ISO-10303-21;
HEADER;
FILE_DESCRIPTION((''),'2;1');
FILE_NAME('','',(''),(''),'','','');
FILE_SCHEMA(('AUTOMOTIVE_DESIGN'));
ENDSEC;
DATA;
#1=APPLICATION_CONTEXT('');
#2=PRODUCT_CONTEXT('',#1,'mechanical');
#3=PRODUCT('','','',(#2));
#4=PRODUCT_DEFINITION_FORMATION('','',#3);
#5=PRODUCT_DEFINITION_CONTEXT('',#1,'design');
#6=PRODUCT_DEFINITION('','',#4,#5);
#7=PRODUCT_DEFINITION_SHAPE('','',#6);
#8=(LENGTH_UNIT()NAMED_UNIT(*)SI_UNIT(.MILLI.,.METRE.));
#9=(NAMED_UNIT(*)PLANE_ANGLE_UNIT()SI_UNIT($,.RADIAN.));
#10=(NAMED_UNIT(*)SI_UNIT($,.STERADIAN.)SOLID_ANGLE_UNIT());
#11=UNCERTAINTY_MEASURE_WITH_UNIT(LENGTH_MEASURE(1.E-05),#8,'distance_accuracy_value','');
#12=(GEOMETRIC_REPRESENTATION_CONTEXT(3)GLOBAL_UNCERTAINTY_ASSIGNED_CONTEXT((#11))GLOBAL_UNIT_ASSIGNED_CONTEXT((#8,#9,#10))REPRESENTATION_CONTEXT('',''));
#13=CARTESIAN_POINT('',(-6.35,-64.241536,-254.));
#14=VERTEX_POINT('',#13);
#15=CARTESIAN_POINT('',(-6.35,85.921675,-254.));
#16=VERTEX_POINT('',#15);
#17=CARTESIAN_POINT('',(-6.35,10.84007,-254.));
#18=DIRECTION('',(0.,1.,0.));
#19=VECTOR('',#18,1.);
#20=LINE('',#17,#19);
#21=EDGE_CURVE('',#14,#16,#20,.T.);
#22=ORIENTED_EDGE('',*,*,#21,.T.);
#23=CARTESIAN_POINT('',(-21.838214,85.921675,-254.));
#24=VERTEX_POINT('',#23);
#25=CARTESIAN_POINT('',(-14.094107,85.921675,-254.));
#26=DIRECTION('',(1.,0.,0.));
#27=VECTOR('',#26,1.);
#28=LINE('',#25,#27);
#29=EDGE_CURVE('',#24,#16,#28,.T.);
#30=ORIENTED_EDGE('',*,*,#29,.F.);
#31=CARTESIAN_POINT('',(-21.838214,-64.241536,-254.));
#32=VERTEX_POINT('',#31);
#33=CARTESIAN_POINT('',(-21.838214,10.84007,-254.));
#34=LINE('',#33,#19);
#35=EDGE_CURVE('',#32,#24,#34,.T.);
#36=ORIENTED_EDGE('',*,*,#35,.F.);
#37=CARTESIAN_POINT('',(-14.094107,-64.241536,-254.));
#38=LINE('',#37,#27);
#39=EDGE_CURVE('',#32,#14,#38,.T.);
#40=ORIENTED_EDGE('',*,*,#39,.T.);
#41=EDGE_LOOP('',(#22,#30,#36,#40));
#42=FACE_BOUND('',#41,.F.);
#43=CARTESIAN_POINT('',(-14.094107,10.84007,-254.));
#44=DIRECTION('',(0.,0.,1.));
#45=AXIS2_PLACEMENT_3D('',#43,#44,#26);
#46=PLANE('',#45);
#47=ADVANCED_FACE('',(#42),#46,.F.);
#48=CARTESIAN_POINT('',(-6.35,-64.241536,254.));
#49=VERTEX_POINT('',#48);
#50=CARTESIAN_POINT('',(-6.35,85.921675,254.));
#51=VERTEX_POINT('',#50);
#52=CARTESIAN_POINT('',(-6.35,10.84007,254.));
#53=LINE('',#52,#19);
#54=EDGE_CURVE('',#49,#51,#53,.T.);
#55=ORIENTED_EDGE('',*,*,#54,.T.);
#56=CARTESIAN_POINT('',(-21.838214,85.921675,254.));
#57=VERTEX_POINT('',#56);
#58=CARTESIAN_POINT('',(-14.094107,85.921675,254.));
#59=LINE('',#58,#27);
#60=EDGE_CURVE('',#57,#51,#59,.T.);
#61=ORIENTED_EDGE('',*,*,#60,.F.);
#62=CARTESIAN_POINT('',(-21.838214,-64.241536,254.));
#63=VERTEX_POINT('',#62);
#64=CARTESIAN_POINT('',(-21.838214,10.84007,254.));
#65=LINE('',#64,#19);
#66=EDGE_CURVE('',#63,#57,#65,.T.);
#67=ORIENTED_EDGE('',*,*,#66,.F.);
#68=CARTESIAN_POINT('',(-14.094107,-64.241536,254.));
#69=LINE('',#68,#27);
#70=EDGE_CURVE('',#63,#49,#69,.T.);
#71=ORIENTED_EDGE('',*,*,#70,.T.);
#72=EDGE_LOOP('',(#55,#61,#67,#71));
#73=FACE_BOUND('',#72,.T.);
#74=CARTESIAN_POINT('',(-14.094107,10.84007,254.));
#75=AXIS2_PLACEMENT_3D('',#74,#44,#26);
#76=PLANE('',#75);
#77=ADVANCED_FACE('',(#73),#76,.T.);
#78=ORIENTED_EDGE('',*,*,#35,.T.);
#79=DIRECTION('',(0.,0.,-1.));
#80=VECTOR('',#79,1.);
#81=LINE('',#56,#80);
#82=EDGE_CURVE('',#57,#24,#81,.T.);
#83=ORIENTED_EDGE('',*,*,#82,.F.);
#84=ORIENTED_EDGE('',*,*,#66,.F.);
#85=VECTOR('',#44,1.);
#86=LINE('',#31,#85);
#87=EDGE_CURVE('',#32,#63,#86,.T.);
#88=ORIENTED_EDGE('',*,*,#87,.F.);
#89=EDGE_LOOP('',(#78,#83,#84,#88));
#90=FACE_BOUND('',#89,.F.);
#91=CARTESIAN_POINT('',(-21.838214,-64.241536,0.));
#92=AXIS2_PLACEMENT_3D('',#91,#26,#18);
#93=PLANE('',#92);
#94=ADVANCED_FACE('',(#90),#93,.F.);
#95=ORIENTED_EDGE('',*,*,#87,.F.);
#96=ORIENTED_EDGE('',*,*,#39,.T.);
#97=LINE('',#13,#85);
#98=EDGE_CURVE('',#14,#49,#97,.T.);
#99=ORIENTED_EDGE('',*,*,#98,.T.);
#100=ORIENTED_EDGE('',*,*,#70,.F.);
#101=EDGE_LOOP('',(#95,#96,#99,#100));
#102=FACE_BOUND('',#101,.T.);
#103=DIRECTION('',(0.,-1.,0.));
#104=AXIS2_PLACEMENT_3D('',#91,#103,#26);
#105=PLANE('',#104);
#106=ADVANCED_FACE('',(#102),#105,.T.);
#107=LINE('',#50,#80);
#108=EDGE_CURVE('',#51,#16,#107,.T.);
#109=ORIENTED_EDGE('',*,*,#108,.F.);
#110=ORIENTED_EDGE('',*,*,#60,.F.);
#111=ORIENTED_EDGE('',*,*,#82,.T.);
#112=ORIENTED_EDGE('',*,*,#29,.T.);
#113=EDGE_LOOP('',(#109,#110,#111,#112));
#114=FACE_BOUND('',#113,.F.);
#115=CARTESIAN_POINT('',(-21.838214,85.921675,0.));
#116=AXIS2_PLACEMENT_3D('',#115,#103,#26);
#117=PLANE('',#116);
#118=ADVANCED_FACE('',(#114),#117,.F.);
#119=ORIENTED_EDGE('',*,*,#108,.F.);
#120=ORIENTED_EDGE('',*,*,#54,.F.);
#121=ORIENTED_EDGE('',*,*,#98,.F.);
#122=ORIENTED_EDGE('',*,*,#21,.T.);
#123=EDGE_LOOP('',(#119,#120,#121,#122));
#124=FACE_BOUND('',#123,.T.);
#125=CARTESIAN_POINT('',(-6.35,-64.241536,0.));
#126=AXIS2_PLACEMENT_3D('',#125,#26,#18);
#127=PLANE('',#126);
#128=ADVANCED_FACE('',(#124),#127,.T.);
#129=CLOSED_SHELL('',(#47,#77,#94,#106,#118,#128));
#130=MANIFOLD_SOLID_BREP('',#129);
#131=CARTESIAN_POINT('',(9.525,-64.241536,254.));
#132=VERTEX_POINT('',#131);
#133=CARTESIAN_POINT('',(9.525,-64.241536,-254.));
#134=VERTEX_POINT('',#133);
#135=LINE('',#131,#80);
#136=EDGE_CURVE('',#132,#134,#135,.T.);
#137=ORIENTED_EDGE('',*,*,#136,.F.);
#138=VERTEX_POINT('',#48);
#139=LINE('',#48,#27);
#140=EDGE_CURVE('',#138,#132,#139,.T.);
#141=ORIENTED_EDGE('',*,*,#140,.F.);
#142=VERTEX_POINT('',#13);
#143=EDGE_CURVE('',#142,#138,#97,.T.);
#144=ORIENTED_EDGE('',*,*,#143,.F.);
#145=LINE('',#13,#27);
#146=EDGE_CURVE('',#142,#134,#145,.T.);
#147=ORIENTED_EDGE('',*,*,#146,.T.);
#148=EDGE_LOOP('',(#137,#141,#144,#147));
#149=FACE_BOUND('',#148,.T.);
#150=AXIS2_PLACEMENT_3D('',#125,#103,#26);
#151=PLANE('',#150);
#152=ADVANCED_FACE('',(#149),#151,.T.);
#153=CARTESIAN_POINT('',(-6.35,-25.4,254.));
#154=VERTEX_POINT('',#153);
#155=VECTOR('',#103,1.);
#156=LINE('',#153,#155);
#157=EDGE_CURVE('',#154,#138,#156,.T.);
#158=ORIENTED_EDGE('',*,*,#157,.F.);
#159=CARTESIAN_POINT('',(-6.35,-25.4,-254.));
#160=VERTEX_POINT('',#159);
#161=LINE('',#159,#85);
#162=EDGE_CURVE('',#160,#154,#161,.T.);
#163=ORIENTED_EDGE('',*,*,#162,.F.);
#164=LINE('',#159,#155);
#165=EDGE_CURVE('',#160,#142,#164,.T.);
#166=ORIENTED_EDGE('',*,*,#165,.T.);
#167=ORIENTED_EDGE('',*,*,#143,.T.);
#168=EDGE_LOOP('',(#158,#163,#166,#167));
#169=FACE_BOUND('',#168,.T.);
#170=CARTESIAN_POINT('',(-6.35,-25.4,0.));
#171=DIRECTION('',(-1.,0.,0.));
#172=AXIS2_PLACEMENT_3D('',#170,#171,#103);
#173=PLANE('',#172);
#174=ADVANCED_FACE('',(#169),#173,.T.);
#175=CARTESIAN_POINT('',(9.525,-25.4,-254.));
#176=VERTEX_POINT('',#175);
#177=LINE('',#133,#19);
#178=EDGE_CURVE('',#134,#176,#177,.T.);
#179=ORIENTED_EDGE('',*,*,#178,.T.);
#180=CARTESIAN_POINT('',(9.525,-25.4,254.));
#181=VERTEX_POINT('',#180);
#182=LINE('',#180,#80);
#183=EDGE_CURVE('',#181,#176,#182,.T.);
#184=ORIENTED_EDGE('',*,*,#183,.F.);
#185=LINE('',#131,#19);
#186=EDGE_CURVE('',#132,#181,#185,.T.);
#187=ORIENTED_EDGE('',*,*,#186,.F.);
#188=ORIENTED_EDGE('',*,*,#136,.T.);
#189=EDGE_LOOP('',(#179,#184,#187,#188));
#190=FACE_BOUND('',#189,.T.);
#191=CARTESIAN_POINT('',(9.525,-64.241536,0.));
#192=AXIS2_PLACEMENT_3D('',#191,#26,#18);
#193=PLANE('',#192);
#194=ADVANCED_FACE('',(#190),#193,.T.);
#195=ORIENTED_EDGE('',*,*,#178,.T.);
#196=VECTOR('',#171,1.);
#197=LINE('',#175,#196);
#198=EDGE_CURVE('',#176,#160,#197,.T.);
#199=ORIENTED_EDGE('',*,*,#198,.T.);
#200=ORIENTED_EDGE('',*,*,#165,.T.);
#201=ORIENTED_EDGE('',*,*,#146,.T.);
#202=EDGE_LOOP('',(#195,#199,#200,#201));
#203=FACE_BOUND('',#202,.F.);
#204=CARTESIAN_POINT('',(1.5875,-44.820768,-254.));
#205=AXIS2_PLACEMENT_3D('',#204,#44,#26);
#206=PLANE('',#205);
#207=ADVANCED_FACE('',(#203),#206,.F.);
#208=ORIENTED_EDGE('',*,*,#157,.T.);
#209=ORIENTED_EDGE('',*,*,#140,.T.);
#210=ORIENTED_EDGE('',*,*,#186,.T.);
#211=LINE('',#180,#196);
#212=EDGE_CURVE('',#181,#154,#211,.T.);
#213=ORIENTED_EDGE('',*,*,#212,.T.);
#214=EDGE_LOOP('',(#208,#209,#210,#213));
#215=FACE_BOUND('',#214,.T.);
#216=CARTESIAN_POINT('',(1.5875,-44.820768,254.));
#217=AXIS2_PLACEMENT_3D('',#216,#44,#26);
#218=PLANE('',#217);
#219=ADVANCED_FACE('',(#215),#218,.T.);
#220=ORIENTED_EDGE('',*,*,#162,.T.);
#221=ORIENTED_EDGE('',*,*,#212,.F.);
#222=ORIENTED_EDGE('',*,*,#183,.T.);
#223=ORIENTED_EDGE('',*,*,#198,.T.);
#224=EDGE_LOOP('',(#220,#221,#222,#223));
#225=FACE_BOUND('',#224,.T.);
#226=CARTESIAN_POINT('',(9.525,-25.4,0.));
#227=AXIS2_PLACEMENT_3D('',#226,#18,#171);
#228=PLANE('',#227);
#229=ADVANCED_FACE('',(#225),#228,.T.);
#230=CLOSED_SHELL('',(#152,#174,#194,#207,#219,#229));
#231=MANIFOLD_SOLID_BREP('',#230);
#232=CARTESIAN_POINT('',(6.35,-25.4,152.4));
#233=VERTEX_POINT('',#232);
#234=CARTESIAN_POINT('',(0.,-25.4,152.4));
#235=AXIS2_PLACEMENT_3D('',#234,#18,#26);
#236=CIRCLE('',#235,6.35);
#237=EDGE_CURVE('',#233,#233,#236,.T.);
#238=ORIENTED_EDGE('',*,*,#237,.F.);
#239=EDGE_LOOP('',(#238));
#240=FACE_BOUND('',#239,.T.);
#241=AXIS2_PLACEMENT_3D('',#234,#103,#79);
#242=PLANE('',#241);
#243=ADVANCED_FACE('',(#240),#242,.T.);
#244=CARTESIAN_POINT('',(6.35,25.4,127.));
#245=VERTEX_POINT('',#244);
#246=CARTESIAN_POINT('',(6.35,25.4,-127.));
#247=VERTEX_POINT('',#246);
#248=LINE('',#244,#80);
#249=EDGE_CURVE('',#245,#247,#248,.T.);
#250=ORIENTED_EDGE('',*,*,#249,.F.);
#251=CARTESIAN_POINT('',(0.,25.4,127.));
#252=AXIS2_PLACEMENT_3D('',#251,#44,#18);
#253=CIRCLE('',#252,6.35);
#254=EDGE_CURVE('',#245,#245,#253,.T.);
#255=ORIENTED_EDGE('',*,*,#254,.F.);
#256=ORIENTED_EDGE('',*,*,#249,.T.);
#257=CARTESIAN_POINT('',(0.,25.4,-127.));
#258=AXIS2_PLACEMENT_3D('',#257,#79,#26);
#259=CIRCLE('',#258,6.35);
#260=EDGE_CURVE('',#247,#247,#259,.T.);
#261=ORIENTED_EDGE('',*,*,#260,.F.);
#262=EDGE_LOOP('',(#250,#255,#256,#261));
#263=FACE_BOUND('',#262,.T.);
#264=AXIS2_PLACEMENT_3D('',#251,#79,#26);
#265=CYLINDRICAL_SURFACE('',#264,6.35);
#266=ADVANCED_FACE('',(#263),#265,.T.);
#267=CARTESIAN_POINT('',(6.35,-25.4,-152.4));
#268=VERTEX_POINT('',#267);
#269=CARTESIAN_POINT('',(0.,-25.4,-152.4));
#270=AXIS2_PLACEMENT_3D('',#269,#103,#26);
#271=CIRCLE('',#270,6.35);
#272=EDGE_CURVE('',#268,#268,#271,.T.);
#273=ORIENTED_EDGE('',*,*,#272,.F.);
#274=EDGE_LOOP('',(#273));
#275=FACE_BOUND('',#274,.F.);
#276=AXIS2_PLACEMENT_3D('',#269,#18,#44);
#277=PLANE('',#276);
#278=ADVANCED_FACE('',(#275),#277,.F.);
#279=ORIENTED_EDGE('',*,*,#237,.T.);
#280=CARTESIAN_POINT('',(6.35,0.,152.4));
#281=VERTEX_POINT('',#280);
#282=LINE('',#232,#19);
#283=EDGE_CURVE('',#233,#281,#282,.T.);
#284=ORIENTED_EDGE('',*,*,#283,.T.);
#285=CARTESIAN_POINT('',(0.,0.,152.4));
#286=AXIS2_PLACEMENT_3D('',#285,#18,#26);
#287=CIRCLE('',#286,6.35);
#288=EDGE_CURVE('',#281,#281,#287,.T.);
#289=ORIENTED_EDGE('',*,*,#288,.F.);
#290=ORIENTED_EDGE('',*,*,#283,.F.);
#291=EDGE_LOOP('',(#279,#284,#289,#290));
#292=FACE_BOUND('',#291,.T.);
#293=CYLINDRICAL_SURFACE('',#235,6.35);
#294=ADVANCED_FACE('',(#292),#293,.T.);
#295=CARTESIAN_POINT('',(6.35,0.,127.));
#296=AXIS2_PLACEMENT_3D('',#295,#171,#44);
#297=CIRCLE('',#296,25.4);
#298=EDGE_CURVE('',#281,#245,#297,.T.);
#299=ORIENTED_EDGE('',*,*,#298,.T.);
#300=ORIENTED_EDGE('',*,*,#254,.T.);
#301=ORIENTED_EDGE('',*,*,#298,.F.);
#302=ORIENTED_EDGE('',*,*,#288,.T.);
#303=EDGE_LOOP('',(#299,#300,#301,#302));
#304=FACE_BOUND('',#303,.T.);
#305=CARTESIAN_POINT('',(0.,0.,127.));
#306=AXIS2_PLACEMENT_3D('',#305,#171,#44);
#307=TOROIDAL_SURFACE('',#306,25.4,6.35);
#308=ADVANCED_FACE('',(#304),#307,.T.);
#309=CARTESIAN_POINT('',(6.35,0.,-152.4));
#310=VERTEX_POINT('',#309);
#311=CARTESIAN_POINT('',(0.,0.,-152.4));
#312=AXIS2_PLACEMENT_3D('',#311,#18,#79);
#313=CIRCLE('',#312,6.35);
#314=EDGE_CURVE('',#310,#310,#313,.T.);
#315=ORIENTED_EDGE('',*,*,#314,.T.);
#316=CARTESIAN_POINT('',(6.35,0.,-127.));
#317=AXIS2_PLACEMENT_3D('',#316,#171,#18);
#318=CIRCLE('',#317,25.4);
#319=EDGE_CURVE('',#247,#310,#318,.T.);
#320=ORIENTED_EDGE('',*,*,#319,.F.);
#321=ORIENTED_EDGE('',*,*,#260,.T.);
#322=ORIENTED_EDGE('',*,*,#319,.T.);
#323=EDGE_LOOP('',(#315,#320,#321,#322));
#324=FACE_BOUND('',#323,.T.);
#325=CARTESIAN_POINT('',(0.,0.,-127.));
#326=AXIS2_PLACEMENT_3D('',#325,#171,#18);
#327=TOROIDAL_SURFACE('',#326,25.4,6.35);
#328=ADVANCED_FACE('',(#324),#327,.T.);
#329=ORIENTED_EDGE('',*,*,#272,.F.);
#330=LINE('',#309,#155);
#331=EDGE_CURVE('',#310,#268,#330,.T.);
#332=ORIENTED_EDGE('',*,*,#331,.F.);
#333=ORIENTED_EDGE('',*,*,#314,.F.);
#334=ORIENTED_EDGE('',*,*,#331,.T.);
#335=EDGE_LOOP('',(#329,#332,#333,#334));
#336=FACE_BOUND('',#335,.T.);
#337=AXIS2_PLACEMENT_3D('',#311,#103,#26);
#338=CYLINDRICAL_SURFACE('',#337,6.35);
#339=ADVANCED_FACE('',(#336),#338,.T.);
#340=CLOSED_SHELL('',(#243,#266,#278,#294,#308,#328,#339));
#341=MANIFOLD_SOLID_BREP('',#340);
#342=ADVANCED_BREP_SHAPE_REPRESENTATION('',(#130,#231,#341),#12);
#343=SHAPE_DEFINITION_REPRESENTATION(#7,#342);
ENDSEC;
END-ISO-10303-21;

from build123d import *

# Parameters (mm, degrees)
F1_R     = 6.35
F5_DEPTH = 254
F4_W     = 15.4882142484
F4_H     = 150.1632109284
F6_DEPTH = 254


with BuildPart() as f2:
    # F2: sweep along a path in F0
    with BuildLine(Plane.YZ) as f2_path:
        Line((-25.4, 152.4), (0, 152.4))
        ThreePointArc((0, 152.4), (17.9605122421, 144.9605122421), (25.4, 127))
        Line((25.4, 127), (25.4, 0))
        Line((25.4, 0), (25.4, -127))
        ThreePointArc((25.4, -127), (17.9605122421, -144.9605122421), (0, -152.4))
        Line((0, -152.4), (-25.4, -152.4))
    # F1 (on Top) → F2 (sweep)
    with BuildSketch(Plane.XY):
        with Locations((0, 25.4)):
            Circle(F1_R)
    sweep(path=f2_path.line)


with BuildPart() as f5:
    # F3 (on Top) → F5 (new body, symmetric)
    with BuildSketch(Plane.XY):
        Polygon((9.525, -25.4), (6.35, -25.4), (-6.35, -25.4), (-6.35, -64.2415359616), (9.525, -64.2415359616), align=None)
    extrude(amount=F5_DEPTH, both=True)


with BuildPart() as f6:
    # F4 (on Top) → F6 (new body, symmetric)
    with BuildSketch(Plane.XY):
        with Locations((-14.0941071242, 10.8400695026)):
            Rectangle(F4_W, F4_H)
    extrude(amount=F6_DEPTH, both=True)


solid = Compound([f2.part, f5.part, f6.part])
